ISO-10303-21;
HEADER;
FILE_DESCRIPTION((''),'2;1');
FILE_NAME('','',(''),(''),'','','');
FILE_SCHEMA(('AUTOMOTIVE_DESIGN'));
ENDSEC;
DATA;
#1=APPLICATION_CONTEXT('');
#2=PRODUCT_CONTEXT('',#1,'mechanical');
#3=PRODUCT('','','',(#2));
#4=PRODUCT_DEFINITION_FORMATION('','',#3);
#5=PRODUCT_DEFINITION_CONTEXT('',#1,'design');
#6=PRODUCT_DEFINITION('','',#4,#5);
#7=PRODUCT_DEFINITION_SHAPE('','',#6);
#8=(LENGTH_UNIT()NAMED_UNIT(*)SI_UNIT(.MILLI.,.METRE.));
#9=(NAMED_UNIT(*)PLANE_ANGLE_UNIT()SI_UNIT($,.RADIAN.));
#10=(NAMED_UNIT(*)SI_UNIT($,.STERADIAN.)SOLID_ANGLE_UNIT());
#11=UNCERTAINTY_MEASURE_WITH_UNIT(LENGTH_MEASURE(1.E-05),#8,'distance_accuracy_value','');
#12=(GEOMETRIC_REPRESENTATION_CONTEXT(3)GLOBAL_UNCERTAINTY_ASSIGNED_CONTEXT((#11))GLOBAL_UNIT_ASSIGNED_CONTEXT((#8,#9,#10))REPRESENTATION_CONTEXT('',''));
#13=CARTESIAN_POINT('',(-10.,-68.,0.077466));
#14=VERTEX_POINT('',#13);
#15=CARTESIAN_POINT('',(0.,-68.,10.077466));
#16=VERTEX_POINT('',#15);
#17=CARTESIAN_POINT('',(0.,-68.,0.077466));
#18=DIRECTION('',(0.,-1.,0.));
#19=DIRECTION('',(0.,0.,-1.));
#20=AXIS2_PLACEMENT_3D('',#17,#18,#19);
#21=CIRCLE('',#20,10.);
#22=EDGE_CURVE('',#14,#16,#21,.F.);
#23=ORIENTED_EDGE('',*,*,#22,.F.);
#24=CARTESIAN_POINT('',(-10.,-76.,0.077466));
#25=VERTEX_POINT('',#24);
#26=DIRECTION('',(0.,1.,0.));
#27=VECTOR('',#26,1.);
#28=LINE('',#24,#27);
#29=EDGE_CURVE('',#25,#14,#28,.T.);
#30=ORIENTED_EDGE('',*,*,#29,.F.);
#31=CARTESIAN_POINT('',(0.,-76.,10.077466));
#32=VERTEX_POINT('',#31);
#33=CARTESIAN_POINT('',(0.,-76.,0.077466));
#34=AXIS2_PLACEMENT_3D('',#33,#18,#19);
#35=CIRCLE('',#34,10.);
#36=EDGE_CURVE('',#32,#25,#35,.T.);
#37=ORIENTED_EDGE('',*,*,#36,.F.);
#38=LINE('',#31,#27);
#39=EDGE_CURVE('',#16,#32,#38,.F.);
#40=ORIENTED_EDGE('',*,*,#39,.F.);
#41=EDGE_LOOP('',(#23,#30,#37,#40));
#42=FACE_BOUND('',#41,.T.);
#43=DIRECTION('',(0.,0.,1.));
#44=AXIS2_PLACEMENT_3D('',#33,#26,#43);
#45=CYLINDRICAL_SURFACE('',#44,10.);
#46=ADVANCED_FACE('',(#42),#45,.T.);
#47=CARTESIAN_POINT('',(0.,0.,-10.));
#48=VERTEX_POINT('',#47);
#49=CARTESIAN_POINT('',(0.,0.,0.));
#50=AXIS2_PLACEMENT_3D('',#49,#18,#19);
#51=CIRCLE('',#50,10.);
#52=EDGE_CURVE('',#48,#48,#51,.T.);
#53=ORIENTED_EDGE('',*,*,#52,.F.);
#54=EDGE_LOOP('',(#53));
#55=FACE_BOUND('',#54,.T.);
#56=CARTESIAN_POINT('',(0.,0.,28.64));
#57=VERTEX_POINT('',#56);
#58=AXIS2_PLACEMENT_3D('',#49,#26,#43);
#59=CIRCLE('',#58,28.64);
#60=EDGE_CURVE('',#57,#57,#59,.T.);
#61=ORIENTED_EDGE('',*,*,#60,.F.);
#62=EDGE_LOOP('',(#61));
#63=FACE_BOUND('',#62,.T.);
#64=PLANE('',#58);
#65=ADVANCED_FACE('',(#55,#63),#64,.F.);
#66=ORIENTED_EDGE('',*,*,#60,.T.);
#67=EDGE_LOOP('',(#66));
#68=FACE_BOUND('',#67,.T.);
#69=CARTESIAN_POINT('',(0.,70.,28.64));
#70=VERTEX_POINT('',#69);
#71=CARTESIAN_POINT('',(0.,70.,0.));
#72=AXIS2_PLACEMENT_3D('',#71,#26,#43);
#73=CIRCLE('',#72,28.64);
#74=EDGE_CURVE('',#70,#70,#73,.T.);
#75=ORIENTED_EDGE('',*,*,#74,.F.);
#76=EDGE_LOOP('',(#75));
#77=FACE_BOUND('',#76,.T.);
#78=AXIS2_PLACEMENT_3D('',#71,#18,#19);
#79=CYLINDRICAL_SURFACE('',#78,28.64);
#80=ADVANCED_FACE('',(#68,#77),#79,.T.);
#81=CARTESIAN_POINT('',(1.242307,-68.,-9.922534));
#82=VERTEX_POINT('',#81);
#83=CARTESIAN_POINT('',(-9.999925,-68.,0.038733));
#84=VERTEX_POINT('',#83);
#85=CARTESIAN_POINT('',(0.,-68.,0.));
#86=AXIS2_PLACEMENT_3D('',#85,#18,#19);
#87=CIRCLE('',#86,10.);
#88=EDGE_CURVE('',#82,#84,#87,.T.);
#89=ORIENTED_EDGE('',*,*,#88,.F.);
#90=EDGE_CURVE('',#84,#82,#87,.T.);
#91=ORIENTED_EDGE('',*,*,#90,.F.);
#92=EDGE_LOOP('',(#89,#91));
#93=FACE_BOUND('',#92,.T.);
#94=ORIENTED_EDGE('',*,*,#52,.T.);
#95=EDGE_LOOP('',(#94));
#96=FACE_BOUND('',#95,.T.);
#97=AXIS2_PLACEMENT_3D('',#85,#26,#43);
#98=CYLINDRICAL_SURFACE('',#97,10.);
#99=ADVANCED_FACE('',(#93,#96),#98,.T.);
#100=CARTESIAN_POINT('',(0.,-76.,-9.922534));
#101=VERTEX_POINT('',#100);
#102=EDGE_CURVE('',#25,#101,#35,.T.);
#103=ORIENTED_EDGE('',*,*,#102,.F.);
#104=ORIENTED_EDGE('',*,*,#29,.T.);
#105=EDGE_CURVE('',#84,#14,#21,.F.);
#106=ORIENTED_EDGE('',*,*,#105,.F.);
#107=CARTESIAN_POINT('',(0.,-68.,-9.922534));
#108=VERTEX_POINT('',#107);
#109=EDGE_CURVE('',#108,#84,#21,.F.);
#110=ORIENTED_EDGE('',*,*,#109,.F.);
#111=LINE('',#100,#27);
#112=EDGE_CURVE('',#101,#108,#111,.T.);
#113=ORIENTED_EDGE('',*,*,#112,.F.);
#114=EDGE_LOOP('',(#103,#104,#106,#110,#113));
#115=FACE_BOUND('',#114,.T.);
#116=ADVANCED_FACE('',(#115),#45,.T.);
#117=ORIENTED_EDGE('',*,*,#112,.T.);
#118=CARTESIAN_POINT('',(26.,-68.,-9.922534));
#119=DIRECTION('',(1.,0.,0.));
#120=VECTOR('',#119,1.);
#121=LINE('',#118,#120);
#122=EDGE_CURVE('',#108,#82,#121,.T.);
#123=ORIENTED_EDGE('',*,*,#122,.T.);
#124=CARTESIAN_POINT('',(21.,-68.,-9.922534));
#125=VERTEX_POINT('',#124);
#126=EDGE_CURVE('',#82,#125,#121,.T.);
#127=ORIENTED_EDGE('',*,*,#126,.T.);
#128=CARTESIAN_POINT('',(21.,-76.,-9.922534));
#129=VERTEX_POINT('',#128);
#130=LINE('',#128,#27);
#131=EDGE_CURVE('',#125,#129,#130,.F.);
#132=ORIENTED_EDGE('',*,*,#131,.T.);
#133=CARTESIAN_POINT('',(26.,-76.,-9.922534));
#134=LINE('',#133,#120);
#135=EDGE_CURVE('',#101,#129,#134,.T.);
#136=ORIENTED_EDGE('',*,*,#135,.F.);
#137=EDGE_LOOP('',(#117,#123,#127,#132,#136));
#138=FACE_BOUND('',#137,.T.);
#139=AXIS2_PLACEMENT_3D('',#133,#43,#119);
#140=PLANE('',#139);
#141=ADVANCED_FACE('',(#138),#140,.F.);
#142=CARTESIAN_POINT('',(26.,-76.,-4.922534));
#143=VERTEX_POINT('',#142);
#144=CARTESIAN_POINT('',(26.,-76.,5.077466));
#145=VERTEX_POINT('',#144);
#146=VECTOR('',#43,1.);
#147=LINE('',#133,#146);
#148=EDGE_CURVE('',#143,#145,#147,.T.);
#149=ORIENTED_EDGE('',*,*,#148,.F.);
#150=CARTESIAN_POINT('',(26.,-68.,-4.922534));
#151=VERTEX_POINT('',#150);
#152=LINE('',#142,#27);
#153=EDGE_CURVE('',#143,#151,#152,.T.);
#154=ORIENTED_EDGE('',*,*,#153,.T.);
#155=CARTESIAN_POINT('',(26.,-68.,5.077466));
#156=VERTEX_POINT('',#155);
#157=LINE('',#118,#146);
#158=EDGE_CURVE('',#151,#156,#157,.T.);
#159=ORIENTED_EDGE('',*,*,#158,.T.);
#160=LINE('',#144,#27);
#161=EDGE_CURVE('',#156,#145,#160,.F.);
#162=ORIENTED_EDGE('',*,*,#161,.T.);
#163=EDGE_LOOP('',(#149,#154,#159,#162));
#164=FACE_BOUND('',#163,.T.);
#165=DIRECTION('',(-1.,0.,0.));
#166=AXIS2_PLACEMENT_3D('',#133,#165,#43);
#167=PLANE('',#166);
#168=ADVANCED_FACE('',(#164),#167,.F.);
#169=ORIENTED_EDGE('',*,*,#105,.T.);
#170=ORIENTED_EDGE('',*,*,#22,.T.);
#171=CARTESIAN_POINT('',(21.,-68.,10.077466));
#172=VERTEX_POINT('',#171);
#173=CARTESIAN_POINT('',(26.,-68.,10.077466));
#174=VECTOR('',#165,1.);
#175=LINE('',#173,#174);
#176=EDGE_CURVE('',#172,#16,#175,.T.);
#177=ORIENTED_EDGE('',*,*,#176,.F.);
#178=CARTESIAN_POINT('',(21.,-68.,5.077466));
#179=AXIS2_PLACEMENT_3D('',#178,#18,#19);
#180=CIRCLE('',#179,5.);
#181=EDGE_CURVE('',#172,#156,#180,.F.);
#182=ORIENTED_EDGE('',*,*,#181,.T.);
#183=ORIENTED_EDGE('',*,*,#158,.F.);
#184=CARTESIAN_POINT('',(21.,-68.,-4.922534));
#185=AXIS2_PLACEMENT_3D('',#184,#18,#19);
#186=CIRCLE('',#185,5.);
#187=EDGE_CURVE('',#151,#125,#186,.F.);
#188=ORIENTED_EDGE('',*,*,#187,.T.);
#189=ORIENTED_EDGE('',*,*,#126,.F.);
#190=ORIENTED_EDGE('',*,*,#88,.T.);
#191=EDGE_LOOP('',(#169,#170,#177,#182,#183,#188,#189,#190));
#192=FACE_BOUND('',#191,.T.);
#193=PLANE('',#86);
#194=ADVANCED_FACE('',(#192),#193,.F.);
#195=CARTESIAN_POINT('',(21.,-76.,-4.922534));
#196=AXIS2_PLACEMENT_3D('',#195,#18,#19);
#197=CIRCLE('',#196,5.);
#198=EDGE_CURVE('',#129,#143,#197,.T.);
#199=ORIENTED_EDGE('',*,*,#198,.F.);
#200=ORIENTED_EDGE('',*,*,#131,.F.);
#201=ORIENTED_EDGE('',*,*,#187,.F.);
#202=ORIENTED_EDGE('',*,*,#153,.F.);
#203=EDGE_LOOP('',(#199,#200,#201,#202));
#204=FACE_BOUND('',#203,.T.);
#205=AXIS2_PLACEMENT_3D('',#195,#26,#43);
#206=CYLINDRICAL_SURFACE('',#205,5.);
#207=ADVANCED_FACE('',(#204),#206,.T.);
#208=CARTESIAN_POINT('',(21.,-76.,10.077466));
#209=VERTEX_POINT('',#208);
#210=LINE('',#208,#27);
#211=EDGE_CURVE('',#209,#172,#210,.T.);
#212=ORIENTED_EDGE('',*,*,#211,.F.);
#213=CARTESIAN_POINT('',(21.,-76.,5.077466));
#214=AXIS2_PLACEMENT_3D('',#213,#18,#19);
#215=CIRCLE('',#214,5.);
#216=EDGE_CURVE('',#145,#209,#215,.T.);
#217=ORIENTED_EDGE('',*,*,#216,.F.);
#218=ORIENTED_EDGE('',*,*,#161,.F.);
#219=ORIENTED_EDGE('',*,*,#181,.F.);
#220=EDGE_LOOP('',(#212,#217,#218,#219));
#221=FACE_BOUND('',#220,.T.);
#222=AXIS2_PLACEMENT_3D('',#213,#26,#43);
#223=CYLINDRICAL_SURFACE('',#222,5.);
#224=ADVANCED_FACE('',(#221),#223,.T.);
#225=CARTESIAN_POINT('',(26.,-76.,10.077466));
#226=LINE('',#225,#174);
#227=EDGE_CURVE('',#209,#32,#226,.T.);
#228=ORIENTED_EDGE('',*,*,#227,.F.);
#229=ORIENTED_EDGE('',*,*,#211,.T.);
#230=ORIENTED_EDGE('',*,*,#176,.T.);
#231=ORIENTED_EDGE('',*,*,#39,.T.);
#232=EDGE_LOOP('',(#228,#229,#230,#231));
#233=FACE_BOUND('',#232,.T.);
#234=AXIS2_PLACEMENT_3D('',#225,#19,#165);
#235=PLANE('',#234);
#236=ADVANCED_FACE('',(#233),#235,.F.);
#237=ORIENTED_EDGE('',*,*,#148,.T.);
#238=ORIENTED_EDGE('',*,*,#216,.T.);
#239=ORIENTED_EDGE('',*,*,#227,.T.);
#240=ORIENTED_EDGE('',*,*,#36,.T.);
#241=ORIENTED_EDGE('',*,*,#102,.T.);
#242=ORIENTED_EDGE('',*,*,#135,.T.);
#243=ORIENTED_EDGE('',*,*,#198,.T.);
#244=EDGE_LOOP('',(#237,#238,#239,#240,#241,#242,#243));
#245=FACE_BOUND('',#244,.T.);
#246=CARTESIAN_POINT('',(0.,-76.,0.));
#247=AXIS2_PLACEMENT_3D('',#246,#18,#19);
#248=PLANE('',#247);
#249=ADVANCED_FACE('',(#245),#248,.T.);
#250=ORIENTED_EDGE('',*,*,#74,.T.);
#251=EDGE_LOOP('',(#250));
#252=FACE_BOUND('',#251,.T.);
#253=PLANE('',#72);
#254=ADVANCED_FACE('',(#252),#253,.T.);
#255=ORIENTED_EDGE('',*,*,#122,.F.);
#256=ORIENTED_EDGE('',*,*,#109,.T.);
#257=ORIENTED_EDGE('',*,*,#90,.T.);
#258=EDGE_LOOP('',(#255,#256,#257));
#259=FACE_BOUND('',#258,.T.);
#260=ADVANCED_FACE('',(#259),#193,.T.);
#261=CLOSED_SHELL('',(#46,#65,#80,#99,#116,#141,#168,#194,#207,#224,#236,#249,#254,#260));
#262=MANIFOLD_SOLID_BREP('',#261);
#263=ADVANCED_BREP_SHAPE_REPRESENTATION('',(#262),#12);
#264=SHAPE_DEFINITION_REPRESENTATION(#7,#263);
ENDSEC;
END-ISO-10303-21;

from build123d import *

# Parameters (mm, degrees)
SKETCH2_R           = 28.64
BOSS_EXTRUDE1_DEPTH = 70
SKETCH3_R           = 10
BOSS_EXTRUDE2_DEPTH = 68
SKETCH7_W           = 36
SKETCH7_H           = 20
BOSS_EXTRUDE3_DEPTH = 8
FILLET1_R           = 10
FILLET2_R           = 5


with BuildPart() as part:
    # Sketch2 → Boss-Extrude1 (new body)
    with BuildSketch(Plane(origin=(0, 0, 0), x_dir=(1, 0, 0), z_dir=(0, 1, 0))):
        with Locations(Location((0, 0, 0), (0, 0, 270))):
            Circle(SKETCH2_R)
    extrude(amount=BOSS_EXTRUDE1_DEPTH)

    # Sketch3 → Boss-Extrude2 (add)
    with BuildSketch(Plane.XZ):
        with Locations(Location((0, 0, 0), (0, 0, 270))):
            Circle(SKETCH3_R)
    extrude(amount=BOSS_EXTRUDE2_DEPTH)

    # Sketch7 → Boss-Extrude3 (add)
    with BuildSketch(Plane.XZ.offset(68)):
        with Locations((8, 0.077466393)):
            Rectangle(SKETCH7_W, SKETCH7_H)
    extrude(amount=BOSS_EXTRUDE3_DEPTH)

    # Fillet1
    # the kernel refuses this fillet: 10 mm, written as the material it takes off along each edge
    with BuildSketch(Plane(origin=(-10, -68, -9.922533607), x_dir=(1, 0, 0), z_dir=(0, -1, 0))) as fillet1_piece_1:
        with BuildLine():
            CenterArc((FILLET1_R, FILLET1_R), FILLET1_R, 180, 90)
            Line((0, FILLET1_R), (0, 0))
            Line((0, 0), (FILLET1_R, 0))
        make_face()
    extrude(amount=33, mode=Mode.SUBTRACT)
    with BuildSketch(Plane(origin=(-10, -43, 10.077466393), x_dir=(0, 0, -1), z_dir=(0, -1, 0))) as fillet1_piece_2:
        with BuildLine():
            CenterArc((FILLET1_R, FILLET1_R), FILLET1_R, 180, 90)
            Line((0, FILLET1_R), (0, 0))
            Line((0, 0), (FILLET1_R, 0))
        make_face()
    extrude(amount=58, mode=Mode.SUBTRACT)

    # Fillet2
    fillet2_edges = [part.edges().sort_by_distance(p)[0] for p in [
        (26, -72, -9.922533607),
        (26, -72, 10.077466393),
    ]]
    fillet(fillet2_edges, radius=FILLET2_R)


solid = part.part
